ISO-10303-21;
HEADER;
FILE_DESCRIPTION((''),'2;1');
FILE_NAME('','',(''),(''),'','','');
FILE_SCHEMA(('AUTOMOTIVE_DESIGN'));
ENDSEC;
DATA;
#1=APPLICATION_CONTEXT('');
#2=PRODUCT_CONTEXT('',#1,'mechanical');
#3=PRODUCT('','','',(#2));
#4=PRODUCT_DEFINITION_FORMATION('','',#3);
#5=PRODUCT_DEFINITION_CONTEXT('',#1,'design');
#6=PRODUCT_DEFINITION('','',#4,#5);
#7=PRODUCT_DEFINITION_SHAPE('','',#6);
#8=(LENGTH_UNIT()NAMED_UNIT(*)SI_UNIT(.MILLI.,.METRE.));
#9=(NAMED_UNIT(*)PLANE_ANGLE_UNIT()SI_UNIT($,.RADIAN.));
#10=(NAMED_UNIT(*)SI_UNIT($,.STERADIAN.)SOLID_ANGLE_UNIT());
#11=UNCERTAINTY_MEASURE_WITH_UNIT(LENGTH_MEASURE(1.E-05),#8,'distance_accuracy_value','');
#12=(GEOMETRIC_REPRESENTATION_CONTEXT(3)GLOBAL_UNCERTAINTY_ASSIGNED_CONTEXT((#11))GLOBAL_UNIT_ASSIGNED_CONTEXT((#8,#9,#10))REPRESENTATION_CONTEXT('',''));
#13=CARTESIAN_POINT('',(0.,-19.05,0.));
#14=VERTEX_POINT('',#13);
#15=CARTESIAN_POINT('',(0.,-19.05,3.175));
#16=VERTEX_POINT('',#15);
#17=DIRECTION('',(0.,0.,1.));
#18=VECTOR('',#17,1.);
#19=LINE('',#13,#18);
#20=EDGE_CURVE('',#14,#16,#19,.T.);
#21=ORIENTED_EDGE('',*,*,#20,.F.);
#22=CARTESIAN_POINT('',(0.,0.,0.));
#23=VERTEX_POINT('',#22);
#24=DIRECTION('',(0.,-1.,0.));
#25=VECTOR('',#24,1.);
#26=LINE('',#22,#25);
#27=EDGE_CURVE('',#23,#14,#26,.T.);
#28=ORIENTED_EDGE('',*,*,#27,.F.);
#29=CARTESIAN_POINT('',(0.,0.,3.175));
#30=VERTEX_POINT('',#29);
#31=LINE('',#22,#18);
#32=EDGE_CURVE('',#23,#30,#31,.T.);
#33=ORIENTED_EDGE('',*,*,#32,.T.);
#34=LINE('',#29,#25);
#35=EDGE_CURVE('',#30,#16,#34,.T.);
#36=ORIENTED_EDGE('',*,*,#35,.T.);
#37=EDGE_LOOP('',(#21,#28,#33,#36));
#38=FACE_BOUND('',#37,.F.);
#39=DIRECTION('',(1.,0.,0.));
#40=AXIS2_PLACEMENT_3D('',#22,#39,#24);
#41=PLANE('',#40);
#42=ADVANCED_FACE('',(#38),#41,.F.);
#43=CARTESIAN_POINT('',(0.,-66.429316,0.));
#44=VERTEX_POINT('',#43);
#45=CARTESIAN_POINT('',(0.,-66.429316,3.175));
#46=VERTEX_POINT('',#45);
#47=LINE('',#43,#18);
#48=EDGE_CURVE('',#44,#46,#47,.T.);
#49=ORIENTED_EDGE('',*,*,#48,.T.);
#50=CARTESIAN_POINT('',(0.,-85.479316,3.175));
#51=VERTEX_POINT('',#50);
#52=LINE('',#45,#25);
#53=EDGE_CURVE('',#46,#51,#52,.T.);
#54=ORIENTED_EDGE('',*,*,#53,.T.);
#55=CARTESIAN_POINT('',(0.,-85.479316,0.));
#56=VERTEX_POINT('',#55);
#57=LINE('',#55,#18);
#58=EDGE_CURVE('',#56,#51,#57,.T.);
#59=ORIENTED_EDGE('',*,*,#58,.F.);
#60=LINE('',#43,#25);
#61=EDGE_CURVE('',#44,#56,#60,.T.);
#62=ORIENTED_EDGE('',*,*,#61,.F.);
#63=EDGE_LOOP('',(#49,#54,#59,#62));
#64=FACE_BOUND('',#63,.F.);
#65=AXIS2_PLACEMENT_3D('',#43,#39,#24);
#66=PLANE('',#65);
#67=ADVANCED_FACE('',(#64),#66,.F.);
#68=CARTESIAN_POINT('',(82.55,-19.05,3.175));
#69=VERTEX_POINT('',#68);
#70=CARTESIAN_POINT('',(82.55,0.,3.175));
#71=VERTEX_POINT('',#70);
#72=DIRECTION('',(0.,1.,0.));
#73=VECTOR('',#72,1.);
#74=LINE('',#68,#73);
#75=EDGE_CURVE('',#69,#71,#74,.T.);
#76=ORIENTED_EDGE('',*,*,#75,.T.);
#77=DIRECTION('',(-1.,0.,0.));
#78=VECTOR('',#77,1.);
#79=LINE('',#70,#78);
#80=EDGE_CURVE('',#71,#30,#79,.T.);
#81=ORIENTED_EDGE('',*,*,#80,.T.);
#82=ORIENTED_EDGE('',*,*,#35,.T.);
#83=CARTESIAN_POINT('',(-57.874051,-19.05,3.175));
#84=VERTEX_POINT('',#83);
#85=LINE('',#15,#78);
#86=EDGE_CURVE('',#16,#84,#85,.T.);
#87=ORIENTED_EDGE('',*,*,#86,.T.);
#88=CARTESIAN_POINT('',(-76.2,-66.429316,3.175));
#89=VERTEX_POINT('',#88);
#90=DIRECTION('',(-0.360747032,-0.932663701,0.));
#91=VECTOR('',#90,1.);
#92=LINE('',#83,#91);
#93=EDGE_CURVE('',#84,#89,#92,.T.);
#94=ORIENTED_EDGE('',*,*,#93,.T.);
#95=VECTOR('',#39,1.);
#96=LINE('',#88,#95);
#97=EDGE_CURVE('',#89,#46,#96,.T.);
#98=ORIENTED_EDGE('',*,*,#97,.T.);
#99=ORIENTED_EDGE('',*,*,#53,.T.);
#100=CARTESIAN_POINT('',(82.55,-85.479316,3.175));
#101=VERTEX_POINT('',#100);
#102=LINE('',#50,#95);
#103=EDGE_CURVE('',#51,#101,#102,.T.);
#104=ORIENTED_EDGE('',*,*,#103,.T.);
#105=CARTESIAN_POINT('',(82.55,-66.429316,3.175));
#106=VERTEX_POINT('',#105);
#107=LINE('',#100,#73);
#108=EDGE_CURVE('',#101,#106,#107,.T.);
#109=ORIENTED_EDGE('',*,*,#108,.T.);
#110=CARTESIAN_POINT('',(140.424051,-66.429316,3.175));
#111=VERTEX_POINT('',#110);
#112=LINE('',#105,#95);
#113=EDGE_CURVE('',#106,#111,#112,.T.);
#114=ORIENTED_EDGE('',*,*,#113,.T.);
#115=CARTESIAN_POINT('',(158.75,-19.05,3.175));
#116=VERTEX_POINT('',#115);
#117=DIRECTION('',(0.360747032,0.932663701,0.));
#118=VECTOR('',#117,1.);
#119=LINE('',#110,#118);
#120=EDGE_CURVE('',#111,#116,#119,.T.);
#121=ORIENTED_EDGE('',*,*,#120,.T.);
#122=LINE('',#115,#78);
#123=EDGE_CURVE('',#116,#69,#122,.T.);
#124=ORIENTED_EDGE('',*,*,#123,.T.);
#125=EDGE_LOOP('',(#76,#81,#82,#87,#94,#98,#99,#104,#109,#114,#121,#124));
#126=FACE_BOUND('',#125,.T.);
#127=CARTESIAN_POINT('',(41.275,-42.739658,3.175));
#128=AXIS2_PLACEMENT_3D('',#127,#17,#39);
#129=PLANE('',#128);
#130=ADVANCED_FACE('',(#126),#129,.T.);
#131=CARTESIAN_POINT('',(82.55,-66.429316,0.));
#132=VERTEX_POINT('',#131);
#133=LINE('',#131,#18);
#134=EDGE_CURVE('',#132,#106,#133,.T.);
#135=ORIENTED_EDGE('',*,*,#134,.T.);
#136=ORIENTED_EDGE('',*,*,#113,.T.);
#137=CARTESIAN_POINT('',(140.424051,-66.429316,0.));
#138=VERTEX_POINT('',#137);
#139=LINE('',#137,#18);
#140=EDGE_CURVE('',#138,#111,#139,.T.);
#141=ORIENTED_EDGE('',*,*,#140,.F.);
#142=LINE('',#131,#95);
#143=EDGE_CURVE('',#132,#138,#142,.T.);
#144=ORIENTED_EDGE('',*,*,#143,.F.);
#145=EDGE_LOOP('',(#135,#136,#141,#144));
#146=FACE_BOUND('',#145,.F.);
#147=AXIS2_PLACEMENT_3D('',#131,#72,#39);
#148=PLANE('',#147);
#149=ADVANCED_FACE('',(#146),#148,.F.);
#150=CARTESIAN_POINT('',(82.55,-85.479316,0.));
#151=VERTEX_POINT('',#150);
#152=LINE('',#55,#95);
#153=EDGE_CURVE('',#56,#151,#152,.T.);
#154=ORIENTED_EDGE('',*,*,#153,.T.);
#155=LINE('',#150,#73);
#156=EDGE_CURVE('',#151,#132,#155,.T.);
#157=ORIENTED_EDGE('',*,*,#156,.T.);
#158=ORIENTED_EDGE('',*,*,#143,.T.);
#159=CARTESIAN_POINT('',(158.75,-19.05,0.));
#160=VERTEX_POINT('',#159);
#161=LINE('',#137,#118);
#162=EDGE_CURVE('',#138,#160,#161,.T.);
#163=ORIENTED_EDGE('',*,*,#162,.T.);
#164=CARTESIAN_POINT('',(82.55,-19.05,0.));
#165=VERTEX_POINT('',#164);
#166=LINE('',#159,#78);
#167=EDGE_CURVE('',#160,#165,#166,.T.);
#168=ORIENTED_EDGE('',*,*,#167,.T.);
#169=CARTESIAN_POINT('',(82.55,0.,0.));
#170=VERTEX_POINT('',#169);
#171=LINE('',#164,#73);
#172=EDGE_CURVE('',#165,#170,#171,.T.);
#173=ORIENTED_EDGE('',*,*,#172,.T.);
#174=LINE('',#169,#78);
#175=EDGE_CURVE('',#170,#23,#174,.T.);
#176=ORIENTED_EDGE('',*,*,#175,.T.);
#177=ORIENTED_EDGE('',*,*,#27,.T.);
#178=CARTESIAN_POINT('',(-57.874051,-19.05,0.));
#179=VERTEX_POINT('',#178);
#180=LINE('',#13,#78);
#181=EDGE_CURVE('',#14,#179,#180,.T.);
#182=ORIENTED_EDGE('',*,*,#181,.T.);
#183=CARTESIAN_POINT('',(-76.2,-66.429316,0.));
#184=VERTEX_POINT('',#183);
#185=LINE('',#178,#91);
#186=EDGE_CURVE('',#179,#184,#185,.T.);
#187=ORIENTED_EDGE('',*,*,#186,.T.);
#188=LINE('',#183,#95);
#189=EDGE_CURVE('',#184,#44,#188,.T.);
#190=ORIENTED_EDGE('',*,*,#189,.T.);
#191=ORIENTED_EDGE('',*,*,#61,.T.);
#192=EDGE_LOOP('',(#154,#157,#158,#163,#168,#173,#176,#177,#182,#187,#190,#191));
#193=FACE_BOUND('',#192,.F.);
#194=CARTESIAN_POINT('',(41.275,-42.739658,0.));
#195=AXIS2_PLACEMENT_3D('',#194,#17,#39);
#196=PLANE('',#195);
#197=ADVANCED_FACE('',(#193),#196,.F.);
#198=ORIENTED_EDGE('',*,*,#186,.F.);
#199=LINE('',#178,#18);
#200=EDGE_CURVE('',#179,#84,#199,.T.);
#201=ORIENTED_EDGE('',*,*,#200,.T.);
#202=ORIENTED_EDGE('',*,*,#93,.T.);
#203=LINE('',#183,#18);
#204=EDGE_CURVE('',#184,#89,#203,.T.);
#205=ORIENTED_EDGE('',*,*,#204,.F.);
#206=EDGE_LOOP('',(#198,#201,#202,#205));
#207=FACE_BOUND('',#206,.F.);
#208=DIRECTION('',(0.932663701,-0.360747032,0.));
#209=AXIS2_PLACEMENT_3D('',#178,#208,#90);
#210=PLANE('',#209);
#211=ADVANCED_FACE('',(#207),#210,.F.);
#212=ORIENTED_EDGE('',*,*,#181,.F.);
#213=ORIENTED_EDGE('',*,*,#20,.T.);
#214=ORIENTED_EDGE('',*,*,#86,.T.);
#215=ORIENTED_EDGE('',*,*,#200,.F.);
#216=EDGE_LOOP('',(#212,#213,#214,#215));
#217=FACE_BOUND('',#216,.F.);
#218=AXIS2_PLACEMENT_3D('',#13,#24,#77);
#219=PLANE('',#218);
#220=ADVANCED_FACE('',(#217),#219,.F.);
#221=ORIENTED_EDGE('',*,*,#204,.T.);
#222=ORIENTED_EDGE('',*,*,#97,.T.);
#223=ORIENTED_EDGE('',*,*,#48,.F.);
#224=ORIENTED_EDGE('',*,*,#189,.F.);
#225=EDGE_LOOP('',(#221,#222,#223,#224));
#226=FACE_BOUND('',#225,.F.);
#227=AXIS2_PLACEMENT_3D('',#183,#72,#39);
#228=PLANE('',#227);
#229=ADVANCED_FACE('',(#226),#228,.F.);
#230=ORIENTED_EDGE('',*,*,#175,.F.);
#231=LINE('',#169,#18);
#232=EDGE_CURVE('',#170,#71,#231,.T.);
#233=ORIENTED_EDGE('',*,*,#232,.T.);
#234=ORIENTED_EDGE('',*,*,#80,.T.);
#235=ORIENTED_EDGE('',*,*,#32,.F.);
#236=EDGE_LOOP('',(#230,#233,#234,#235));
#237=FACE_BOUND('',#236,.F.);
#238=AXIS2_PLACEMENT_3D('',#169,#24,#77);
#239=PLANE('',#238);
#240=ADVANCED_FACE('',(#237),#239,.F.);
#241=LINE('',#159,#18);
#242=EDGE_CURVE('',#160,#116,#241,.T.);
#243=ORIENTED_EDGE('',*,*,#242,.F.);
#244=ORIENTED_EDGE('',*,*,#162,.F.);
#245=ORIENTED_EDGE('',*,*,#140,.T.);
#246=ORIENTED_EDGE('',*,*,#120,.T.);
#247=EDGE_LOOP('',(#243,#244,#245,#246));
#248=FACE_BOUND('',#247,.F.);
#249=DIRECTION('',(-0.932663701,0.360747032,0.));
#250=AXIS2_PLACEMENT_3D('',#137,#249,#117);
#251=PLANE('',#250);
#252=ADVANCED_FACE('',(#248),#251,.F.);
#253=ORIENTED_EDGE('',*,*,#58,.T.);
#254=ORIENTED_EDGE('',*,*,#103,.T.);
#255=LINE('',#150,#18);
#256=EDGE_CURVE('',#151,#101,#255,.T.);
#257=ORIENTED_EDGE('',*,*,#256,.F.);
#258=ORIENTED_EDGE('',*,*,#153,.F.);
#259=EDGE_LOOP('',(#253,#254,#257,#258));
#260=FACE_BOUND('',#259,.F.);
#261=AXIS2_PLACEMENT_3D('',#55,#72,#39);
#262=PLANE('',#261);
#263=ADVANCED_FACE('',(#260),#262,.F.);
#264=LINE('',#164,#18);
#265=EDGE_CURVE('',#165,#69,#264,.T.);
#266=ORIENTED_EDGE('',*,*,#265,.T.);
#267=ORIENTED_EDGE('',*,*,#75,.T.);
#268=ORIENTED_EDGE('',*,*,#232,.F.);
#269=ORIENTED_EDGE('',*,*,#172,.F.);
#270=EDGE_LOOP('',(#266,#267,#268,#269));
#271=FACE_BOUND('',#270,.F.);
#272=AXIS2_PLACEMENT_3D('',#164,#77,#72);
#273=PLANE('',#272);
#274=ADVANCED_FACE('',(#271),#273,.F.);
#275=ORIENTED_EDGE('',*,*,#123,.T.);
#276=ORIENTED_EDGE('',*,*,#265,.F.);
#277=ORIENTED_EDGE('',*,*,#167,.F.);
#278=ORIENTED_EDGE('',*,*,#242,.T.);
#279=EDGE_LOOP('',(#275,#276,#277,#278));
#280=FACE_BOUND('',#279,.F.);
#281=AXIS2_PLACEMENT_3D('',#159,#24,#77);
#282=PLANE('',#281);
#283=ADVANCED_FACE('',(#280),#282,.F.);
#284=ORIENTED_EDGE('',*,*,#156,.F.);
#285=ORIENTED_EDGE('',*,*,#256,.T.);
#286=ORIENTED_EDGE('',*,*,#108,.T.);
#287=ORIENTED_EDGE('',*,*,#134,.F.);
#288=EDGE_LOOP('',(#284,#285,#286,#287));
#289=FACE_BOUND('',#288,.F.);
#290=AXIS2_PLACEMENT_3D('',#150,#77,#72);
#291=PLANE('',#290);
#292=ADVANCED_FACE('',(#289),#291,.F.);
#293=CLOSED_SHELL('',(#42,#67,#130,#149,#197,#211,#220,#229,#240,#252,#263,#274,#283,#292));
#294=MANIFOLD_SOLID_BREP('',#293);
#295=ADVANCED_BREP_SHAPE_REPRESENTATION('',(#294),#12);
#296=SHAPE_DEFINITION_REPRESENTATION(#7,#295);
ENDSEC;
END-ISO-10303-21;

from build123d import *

# Parameters (mm, degrees)
F1_DEPTH = 3.175


# Not quite as in the source:
# - the program builds the solid bodies; features that only make, move or delete a surface that nothing else refers to are left out


with BuildPart() as f1:
    # F0 (on Top) → F1 (new body)
    with BuildSketch(Plane.XY):
        Polygon((82.55, 0), (0, 0), (0, -19.05), (-57.8740507578, -19.05), (-76.2, -66.4293159973), (0, -66.4293159973), (0, -85.4793159973), (82.55, -85.4793159973), (82.55, -66.4293159973), (140.4240507578, -66.4293159973), (158.75, -19.05), (82.55, -19.05), align=None)
    extrude(amount=F1_DEPTH)


solid = f1.part
